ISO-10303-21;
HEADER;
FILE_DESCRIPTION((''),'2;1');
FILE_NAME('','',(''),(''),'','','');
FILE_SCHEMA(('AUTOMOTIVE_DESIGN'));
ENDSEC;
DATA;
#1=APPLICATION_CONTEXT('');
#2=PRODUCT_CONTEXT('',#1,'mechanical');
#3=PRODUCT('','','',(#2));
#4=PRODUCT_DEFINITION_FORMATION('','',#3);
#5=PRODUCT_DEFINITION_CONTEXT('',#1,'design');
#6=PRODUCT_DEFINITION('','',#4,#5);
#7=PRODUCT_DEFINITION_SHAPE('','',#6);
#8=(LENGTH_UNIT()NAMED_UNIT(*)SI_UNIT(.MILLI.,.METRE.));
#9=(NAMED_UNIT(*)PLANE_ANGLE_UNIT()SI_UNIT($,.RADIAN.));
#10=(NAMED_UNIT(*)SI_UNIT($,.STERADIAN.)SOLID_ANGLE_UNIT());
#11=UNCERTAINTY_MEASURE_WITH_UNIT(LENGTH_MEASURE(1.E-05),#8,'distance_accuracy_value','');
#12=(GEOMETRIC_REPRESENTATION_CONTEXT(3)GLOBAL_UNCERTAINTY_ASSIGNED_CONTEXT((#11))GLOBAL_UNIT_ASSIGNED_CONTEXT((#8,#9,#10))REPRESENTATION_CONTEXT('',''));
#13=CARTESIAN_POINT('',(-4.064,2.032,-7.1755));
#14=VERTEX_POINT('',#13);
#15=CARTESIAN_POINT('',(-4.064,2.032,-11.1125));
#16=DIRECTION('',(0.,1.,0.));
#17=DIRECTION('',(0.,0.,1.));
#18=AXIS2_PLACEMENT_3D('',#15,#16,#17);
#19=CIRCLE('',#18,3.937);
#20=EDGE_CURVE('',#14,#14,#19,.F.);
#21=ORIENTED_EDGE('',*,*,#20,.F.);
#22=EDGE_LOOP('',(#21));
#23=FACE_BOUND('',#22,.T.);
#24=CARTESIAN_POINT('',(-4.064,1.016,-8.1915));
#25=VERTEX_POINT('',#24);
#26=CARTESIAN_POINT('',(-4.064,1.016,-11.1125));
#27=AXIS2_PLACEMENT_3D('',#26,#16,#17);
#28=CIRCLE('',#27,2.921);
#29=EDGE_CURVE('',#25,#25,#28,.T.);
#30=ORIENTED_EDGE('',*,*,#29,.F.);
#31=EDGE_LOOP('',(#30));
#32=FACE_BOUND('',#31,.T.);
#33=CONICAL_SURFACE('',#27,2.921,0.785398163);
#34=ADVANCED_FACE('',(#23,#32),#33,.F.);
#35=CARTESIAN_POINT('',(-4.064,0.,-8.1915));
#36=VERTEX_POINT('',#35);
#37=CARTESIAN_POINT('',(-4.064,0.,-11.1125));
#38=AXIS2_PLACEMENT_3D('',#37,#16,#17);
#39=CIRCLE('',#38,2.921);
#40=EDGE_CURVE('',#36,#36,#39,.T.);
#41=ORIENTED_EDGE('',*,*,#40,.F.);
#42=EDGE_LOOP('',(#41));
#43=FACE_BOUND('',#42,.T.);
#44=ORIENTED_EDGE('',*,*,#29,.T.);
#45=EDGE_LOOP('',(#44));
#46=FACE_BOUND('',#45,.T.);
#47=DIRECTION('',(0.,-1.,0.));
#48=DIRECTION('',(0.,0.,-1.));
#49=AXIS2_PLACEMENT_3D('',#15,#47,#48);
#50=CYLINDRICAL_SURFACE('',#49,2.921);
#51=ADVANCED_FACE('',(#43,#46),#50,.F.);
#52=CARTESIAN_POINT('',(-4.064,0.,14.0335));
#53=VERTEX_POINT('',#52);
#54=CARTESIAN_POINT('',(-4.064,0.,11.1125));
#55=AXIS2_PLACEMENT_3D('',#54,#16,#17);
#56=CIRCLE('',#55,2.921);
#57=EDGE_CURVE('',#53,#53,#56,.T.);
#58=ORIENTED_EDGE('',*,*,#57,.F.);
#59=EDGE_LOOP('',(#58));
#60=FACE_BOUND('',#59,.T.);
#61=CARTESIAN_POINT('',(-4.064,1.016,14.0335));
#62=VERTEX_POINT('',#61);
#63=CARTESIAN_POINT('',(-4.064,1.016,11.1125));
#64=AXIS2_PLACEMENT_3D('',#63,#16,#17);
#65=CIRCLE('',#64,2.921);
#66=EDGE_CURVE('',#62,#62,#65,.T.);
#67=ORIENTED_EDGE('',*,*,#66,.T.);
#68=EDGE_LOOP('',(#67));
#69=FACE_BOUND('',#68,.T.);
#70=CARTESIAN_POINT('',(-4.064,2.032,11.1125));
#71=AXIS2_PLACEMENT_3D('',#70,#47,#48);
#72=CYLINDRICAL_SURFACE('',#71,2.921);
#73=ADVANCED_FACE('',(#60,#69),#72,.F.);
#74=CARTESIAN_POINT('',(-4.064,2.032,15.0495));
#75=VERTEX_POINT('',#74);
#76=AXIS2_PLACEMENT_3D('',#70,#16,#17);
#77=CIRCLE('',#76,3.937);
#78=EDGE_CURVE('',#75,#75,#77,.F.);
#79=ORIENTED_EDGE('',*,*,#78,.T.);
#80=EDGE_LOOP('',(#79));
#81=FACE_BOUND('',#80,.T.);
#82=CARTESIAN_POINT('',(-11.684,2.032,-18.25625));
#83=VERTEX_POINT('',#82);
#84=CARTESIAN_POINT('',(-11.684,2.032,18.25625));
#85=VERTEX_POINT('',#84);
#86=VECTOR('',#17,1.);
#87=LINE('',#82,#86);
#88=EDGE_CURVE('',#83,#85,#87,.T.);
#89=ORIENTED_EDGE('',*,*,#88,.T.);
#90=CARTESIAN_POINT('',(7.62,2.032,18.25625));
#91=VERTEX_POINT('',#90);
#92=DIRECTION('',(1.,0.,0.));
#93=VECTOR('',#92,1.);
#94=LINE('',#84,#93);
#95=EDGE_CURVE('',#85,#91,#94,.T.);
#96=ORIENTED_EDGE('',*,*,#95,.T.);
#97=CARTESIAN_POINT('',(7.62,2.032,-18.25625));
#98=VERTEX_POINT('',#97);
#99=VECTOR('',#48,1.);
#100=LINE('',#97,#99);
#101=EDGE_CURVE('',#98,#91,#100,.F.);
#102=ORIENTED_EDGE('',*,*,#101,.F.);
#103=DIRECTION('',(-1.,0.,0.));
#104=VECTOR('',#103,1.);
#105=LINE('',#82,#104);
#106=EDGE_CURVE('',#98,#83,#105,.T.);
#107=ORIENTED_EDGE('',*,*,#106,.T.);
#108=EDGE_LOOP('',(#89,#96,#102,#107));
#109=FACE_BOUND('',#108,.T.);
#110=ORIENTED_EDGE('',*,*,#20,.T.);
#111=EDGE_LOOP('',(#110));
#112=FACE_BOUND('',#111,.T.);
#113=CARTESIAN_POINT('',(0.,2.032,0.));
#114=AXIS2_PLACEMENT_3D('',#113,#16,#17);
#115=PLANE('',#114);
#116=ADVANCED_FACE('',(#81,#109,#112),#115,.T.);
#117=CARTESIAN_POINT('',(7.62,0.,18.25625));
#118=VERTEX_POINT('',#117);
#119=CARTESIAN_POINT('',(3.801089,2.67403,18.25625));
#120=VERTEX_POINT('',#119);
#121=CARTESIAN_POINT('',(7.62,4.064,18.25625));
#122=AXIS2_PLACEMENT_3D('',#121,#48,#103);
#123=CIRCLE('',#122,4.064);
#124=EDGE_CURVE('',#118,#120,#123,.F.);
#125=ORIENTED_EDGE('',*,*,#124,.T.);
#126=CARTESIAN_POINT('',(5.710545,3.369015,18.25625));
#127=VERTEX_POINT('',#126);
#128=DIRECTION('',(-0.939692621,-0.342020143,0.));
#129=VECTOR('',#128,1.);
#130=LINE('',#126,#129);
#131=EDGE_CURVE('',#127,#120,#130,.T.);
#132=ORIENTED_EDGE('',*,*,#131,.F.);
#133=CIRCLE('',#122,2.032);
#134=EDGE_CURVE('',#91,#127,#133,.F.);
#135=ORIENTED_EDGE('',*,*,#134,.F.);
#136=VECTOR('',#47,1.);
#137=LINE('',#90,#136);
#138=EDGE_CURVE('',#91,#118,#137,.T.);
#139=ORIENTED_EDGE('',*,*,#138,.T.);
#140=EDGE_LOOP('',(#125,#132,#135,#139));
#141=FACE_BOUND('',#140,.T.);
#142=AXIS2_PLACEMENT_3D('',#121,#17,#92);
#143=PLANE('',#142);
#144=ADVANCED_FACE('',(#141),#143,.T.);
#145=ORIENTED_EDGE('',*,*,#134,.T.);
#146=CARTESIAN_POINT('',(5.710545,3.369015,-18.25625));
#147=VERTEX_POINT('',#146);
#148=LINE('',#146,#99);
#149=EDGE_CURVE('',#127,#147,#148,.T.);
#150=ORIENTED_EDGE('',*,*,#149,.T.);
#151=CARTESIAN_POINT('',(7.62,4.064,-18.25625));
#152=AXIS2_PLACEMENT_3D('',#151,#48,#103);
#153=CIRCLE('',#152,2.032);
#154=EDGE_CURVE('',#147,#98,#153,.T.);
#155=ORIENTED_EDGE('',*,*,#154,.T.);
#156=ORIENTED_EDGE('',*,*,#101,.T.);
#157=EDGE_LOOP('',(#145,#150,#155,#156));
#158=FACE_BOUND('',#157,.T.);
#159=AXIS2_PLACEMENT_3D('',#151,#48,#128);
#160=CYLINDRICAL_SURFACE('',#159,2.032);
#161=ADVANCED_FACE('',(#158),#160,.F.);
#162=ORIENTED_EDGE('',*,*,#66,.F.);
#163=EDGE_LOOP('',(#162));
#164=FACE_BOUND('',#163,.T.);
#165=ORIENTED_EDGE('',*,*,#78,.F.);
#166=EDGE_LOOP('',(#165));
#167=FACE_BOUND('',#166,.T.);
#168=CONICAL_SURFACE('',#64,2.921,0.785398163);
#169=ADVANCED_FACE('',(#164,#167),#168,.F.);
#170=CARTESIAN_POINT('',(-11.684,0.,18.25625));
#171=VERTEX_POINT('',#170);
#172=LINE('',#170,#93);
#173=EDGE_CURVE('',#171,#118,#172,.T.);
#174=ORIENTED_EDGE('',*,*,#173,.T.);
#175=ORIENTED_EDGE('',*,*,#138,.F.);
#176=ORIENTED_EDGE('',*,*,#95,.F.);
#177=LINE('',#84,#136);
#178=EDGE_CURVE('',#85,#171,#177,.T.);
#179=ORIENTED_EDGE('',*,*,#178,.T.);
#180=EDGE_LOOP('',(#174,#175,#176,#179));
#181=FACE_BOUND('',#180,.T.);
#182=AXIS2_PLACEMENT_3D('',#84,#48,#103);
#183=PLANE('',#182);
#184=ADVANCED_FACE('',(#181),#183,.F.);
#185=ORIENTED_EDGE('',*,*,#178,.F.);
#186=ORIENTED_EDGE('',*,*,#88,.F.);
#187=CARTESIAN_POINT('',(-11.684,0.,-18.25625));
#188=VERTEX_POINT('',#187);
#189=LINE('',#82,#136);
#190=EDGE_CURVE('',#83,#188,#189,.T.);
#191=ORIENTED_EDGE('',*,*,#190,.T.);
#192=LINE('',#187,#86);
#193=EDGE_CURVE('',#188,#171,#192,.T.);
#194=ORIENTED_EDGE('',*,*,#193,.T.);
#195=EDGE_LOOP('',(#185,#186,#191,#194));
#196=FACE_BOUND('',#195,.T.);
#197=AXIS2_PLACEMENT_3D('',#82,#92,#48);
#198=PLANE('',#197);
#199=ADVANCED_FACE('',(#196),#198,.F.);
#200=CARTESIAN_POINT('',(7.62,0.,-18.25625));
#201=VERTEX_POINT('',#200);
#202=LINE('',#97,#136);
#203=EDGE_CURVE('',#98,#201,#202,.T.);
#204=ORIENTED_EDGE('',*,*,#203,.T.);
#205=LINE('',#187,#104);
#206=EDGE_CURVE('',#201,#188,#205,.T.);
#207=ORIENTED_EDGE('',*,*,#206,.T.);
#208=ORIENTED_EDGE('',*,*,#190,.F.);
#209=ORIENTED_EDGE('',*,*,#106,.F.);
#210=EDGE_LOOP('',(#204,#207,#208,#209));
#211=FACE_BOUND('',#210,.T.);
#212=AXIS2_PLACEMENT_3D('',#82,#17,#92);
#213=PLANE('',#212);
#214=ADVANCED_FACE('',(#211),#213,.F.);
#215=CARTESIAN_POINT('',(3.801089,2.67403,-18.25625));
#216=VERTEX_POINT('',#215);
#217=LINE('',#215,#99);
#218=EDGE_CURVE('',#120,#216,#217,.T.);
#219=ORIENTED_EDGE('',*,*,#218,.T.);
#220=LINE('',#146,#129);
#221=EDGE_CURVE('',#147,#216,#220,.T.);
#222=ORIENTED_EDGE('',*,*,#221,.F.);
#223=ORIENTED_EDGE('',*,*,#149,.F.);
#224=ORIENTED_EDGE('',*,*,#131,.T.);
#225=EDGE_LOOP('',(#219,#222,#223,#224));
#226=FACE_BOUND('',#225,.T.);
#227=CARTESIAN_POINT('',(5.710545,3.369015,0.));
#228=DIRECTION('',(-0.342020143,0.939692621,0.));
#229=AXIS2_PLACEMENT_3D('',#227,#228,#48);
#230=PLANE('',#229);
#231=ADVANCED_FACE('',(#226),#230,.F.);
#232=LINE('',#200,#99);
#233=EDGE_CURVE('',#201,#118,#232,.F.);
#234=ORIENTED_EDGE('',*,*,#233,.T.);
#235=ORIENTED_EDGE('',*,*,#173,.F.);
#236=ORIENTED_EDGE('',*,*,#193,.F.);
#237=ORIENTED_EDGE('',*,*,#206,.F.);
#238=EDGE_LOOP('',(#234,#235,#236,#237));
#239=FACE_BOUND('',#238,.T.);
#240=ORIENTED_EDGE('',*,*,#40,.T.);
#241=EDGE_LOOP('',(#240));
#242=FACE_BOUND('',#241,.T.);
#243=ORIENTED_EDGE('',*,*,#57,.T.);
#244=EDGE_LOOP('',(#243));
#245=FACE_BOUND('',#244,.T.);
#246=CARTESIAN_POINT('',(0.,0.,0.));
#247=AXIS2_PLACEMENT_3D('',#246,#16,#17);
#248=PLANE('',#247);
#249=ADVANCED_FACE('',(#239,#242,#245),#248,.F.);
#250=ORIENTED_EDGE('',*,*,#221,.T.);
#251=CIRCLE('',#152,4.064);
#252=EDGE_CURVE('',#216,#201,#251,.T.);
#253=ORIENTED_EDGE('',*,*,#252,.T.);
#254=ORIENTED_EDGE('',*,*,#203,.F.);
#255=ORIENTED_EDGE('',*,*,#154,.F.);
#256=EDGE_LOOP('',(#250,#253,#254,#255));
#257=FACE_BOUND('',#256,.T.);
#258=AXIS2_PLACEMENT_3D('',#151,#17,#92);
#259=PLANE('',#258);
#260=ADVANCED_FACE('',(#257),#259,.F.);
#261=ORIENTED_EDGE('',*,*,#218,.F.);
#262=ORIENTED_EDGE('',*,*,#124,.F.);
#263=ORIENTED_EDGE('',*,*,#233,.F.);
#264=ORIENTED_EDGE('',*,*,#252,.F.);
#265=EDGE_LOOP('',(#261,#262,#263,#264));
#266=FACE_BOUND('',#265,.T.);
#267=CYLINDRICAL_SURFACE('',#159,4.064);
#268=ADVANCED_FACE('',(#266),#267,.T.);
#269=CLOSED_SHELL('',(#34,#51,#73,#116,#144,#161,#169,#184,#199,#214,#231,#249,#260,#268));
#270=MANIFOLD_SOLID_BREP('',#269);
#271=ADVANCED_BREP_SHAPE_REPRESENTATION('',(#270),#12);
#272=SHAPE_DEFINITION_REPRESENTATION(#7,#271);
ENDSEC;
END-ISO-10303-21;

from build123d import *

# Parameters (mm, degrees)
SKETCH1_W          = 23.368
SKETCH1_H          = 36.5125
SKETCH1_R          = 2.921
BASE_FLANGE1_DEPTH = 2.032
HEM1_START         = -18.25625
HEM1_DEPTH         = 36.5125
HEM1_2_DEPTH       = 36.5125
CHAMFER1_SIZE      = 1.016


# Read off the part's stored shape, not the designer's step: Hem1
# Sheet-metal steps are written as plain solids
with BuildPart() as part:
    # Sketch1 → Base-Flange1 (new body)
    with BuildSketch(Plane(origin=(0, 0, 0), x_dir=(1, 0, 0), z_dir=(0, 1, 0))):
        Rectangle(SKETCH1_W, SKETCH1_H)
        with Locations(Location((-4.064, -11.1125, 0), (0, 0, 270))):
            Circle(SKETCH1_R, mode=Mode.SUBTRACT)
        with Locations(Location((-4.064, 11.1125, 0), (0, 0, 270))):
            Circle(SKETCH1_R, mode=Mode.SUBTRACT)
    extrude(amount=BASE_FLANGE1_DEPTH)

    # Hem1 outline → Hem1 (cut)
    with BuildSketch(Plane.XY.offset(HEM1_START)):
        with BuildLine():
            Line((11.684, 2.032), (11.139527241, 2.032))
            ThreePointArc((11.139527241, 2.032), (9.652, 0.544472759), (7.62, 0))
            Line((7.62, 0), (11.684, 0))
            Line((11.684, 0), (11.684, 2.032))
        make_face()
    extrude(amount=HEM1_DEPTH, mode=Mode.SUBTRACT)

    # Hem1 2 outline → Hem1 2 (add)
    with BuildSketch(Plane.XY.offset(HEM1_START)):
        with BuildLine():
            Line((3.801089189, 2.674030138), (5.710544595, 3.369015069))
            ThreePointArc((5.710544595, 3.369015069), (8.785507319, 5.728516954), (7.62, 2.032))
            Line((7.62, 2.032), (11.139527241, 2.032))
            ThreePointArc((11.139527241, 2.032), (7.974200939, 8.112535253), (3.801089189, 2.674030138))
        make_face()
    extrude(amount=HEM1_2_DEPTH)

    # Chamfer1
    chamfer1_edges = [part.edges().sort_by_distance(p)[0] for p in [
        (-4.064, 2.032, 8.1915),
        (-4.064, 2.032, -14.0335),
    ]]
    chamfer(chamfer1_edges, length=CHAMFER1_SIZE)


solid = part.part
